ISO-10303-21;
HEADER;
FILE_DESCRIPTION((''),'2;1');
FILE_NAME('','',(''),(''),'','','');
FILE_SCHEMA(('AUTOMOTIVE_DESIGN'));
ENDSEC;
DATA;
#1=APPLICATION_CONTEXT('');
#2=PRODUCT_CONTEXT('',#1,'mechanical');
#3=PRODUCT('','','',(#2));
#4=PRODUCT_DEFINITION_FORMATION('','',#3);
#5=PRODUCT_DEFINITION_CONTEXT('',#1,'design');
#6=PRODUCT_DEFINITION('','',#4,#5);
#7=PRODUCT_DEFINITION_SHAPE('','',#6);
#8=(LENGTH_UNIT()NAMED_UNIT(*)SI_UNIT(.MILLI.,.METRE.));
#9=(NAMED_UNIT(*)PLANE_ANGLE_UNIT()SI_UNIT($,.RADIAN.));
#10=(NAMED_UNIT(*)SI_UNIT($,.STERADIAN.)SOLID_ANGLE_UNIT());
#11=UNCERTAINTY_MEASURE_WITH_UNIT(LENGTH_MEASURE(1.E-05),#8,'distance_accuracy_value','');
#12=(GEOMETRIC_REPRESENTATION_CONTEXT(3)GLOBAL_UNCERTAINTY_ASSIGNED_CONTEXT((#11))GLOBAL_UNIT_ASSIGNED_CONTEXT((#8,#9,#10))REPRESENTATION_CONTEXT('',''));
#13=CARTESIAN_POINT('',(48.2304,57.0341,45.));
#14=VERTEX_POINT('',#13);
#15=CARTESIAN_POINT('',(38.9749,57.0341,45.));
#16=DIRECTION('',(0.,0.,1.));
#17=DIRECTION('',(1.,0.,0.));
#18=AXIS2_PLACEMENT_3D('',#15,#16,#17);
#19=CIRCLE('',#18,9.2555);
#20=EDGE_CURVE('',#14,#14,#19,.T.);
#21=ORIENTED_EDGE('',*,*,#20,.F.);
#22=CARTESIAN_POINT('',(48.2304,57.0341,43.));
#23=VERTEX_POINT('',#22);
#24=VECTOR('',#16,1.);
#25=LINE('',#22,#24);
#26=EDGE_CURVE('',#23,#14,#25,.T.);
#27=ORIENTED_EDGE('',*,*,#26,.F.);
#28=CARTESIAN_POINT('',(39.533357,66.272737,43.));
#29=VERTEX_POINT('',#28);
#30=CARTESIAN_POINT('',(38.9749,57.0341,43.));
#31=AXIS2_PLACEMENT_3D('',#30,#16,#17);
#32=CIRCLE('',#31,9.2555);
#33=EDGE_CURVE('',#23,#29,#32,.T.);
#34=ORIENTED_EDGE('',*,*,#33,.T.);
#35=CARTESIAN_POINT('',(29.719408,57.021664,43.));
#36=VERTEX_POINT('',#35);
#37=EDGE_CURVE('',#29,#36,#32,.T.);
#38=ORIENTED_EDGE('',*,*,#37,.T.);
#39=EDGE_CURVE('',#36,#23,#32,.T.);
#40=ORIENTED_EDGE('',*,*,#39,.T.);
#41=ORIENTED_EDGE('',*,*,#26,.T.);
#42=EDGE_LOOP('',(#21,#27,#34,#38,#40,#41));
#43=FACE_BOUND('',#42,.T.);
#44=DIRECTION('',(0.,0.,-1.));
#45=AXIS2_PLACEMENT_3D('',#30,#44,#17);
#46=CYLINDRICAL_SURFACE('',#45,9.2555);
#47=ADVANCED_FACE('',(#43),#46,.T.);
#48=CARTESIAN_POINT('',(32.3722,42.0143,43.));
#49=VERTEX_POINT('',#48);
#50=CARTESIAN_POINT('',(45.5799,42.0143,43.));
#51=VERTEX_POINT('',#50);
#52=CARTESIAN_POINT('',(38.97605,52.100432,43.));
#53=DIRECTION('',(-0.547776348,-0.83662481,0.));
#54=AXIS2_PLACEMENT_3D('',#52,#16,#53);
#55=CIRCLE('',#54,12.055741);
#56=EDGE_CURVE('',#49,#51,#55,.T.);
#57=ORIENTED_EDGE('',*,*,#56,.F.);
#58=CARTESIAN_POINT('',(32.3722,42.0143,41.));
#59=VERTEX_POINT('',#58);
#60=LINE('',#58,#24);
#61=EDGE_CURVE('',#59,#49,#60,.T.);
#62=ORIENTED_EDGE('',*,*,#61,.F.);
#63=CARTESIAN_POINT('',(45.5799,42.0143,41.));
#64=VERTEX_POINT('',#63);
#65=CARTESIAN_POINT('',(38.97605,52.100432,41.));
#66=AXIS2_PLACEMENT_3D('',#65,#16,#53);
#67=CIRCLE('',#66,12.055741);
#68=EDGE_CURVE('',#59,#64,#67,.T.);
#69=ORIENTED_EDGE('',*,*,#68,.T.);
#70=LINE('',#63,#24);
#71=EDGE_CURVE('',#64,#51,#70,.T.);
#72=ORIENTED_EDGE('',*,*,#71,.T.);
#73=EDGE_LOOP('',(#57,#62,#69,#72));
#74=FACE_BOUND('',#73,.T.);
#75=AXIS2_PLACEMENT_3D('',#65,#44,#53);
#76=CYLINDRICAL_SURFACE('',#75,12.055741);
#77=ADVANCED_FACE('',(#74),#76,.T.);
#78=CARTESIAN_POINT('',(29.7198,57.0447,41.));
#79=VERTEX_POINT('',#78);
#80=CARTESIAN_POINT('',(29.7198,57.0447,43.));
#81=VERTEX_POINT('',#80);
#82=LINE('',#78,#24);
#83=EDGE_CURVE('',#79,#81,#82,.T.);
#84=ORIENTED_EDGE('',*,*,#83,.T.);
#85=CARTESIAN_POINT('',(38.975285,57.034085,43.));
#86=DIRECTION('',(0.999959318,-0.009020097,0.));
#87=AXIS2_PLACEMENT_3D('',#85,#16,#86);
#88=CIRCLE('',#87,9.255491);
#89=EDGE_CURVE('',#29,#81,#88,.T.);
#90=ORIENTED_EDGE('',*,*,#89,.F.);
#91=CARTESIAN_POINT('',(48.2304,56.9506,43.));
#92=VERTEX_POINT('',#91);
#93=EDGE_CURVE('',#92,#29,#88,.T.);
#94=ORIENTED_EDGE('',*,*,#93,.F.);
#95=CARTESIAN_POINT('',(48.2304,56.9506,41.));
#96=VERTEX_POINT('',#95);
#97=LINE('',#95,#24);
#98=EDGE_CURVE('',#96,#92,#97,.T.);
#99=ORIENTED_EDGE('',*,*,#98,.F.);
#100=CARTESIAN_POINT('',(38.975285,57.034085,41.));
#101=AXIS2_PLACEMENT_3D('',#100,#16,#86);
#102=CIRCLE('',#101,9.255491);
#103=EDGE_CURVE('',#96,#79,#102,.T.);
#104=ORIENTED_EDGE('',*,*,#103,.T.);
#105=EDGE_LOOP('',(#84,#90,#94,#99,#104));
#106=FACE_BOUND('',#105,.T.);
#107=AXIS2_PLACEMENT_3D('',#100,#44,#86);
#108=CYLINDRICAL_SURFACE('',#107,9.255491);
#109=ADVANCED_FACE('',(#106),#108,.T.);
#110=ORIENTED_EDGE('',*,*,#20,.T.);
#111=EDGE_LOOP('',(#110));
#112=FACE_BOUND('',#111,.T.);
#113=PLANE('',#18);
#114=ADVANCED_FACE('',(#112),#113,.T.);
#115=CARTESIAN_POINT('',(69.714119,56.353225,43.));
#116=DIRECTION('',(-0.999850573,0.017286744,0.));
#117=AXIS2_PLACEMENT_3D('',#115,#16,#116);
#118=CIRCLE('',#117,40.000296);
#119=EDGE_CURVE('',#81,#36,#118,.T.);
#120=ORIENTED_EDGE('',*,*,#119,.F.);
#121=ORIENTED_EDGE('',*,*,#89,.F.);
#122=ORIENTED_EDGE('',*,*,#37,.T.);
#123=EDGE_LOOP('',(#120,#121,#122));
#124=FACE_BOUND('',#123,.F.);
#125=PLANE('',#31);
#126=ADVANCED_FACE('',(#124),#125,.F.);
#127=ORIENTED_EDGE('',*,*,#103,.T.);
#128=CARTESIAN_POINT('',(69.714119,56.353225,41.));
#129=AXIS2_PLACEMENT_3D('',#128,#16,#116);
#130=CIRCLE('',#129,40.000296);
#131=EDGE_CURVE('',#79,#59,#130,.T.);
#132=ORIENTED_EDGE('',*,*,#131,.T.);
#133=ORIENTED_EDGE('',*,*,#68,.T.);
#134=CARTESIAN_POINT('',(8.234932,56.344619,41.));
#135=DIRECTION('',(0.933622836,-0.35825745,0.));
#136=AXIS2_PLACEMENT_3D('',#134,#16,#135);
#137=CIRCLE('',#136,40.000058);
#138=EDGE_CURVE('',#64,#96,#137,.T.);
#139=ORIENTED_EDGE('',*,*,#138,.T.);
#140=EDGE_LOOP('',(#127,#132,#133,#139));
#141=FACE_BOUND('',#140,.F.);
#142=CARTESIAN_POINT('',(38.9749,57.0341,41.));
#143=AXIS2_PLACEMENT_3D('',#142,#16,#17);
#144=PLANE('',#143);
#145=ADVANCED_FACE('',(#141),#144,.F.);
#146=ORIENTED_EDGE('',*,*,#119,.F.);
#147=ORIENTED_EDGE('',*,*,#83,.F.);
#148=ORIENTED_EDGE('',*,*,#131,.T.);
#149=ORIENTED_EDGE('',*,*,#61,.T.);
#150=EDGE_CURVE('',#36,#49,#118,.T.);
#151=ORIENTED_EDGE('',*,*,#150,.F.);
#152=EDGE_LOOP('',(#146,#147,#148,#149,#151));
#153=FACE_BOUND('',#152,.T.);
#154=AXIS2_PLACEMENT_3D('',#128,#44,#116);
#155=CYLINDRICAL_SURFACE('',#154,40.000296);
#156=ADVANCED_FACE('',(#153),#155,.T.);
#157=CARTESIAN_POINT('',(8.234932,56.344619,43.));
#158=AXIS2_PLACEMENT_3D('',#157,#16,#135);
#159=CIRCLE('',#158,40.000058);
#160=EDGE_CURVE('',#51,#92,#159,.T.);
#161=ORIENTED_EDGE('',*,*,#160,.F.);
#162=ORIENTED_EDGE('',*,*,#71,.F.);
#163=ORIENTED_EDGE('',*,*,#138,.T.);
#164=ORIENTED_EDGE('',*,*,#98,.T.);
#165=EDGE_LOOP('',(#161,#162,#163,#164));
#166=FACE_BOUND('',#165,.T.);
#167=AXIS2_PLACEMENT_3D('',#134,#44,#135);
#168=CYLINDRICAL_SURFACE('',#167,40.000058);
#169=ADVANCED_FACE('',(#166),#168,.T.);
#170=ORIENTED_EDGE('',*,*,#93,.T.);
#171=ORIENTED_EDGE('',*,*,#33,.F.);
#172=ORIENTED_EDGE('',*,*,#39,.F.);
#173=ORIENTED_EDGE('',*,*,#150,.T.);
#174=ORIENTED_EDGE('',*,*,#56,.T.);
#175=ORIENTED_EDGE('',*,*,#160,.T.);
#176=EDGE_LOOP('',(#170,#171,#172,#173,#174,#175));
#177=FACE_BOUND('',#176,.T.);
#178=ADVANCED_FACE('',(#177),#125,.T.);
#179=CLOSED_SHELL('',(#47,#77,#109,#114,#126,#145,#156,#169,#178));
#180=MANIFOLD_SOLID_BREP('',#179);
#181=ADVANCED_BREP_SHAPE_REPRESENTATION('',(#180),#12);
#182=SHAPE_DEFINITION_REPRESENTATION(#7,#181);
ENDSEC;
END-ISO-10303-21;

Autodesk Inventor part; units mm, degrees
ref_plane "Plano de trabajo5" through (38.9749, 57.0341, 41) normal (0, 0, 1) x (1, 0, 0)
sketch "Boceto10" plane through (38.9749, 57.0341, 41) normal (0, 0, 1) x (1, 0, 0)
  arc A0 (9.2555, -0.0835) -> (-9.2551, 0.0106) centre (0.0004, 0) ccw
  arc A1 (-9.2551, 0.0106) -> (-6.6027, -15.0198) centre (30.7389, -0.6809) ccw
  arc A2 (6.605, -15.0198) -> (9.2555, -0.0835) centre (-30.7399, -0.6895) ccw
  arc A3 (-6.6027, -15.0198) -> (6.605, -15.0198) centre (0.0012, -4.9335) ccw
extrude "Extrusión7" add sketch "Boceto10" along normal blind 2
ref_plane "Plano de trabajo4" through (38.9749, 57.0341, -1) normal (0, 0, -1) x (-1, 0, 0)
ref_plane "Plano de trabajo2" through (0, 0, 0) normal (0, 0, 1) x (1, 0, 0)
sketch "Boceto34" plane through (38.9749, 57.0341, 43) normal (0, 0, 1) x (1, 0, 0)
  circle A0 centre (0, 0) radius 9.2555
  point P0 (-38.9749, -57.0341)
extrude "Extrusión26" add sketch "Boceto34" along normal blind 2
equation "\"Radio_pliegue\" = Grosor"
equation "\"Anchura_desahogo_plegado\" = Grosor"
equation "\"Profundidad_desahogo_plegado\" = 0.5 * Grosor"
equation "\"Tamaño_destalonado\" = 4 * Grosor"
equation "\"Remanente_mínimo\" = 2 * Grosor"
equation "\"Radiodetransición\" = Radio_pliegue"
equation "\"Tamaño_de_radio_de_Jacobi\" = Radio_pliegue"
equation "\"TamañoSeparación\" = Grosor"
equation "\"Grosor\" = 0.5"
properties part number "brazocuadrado"
